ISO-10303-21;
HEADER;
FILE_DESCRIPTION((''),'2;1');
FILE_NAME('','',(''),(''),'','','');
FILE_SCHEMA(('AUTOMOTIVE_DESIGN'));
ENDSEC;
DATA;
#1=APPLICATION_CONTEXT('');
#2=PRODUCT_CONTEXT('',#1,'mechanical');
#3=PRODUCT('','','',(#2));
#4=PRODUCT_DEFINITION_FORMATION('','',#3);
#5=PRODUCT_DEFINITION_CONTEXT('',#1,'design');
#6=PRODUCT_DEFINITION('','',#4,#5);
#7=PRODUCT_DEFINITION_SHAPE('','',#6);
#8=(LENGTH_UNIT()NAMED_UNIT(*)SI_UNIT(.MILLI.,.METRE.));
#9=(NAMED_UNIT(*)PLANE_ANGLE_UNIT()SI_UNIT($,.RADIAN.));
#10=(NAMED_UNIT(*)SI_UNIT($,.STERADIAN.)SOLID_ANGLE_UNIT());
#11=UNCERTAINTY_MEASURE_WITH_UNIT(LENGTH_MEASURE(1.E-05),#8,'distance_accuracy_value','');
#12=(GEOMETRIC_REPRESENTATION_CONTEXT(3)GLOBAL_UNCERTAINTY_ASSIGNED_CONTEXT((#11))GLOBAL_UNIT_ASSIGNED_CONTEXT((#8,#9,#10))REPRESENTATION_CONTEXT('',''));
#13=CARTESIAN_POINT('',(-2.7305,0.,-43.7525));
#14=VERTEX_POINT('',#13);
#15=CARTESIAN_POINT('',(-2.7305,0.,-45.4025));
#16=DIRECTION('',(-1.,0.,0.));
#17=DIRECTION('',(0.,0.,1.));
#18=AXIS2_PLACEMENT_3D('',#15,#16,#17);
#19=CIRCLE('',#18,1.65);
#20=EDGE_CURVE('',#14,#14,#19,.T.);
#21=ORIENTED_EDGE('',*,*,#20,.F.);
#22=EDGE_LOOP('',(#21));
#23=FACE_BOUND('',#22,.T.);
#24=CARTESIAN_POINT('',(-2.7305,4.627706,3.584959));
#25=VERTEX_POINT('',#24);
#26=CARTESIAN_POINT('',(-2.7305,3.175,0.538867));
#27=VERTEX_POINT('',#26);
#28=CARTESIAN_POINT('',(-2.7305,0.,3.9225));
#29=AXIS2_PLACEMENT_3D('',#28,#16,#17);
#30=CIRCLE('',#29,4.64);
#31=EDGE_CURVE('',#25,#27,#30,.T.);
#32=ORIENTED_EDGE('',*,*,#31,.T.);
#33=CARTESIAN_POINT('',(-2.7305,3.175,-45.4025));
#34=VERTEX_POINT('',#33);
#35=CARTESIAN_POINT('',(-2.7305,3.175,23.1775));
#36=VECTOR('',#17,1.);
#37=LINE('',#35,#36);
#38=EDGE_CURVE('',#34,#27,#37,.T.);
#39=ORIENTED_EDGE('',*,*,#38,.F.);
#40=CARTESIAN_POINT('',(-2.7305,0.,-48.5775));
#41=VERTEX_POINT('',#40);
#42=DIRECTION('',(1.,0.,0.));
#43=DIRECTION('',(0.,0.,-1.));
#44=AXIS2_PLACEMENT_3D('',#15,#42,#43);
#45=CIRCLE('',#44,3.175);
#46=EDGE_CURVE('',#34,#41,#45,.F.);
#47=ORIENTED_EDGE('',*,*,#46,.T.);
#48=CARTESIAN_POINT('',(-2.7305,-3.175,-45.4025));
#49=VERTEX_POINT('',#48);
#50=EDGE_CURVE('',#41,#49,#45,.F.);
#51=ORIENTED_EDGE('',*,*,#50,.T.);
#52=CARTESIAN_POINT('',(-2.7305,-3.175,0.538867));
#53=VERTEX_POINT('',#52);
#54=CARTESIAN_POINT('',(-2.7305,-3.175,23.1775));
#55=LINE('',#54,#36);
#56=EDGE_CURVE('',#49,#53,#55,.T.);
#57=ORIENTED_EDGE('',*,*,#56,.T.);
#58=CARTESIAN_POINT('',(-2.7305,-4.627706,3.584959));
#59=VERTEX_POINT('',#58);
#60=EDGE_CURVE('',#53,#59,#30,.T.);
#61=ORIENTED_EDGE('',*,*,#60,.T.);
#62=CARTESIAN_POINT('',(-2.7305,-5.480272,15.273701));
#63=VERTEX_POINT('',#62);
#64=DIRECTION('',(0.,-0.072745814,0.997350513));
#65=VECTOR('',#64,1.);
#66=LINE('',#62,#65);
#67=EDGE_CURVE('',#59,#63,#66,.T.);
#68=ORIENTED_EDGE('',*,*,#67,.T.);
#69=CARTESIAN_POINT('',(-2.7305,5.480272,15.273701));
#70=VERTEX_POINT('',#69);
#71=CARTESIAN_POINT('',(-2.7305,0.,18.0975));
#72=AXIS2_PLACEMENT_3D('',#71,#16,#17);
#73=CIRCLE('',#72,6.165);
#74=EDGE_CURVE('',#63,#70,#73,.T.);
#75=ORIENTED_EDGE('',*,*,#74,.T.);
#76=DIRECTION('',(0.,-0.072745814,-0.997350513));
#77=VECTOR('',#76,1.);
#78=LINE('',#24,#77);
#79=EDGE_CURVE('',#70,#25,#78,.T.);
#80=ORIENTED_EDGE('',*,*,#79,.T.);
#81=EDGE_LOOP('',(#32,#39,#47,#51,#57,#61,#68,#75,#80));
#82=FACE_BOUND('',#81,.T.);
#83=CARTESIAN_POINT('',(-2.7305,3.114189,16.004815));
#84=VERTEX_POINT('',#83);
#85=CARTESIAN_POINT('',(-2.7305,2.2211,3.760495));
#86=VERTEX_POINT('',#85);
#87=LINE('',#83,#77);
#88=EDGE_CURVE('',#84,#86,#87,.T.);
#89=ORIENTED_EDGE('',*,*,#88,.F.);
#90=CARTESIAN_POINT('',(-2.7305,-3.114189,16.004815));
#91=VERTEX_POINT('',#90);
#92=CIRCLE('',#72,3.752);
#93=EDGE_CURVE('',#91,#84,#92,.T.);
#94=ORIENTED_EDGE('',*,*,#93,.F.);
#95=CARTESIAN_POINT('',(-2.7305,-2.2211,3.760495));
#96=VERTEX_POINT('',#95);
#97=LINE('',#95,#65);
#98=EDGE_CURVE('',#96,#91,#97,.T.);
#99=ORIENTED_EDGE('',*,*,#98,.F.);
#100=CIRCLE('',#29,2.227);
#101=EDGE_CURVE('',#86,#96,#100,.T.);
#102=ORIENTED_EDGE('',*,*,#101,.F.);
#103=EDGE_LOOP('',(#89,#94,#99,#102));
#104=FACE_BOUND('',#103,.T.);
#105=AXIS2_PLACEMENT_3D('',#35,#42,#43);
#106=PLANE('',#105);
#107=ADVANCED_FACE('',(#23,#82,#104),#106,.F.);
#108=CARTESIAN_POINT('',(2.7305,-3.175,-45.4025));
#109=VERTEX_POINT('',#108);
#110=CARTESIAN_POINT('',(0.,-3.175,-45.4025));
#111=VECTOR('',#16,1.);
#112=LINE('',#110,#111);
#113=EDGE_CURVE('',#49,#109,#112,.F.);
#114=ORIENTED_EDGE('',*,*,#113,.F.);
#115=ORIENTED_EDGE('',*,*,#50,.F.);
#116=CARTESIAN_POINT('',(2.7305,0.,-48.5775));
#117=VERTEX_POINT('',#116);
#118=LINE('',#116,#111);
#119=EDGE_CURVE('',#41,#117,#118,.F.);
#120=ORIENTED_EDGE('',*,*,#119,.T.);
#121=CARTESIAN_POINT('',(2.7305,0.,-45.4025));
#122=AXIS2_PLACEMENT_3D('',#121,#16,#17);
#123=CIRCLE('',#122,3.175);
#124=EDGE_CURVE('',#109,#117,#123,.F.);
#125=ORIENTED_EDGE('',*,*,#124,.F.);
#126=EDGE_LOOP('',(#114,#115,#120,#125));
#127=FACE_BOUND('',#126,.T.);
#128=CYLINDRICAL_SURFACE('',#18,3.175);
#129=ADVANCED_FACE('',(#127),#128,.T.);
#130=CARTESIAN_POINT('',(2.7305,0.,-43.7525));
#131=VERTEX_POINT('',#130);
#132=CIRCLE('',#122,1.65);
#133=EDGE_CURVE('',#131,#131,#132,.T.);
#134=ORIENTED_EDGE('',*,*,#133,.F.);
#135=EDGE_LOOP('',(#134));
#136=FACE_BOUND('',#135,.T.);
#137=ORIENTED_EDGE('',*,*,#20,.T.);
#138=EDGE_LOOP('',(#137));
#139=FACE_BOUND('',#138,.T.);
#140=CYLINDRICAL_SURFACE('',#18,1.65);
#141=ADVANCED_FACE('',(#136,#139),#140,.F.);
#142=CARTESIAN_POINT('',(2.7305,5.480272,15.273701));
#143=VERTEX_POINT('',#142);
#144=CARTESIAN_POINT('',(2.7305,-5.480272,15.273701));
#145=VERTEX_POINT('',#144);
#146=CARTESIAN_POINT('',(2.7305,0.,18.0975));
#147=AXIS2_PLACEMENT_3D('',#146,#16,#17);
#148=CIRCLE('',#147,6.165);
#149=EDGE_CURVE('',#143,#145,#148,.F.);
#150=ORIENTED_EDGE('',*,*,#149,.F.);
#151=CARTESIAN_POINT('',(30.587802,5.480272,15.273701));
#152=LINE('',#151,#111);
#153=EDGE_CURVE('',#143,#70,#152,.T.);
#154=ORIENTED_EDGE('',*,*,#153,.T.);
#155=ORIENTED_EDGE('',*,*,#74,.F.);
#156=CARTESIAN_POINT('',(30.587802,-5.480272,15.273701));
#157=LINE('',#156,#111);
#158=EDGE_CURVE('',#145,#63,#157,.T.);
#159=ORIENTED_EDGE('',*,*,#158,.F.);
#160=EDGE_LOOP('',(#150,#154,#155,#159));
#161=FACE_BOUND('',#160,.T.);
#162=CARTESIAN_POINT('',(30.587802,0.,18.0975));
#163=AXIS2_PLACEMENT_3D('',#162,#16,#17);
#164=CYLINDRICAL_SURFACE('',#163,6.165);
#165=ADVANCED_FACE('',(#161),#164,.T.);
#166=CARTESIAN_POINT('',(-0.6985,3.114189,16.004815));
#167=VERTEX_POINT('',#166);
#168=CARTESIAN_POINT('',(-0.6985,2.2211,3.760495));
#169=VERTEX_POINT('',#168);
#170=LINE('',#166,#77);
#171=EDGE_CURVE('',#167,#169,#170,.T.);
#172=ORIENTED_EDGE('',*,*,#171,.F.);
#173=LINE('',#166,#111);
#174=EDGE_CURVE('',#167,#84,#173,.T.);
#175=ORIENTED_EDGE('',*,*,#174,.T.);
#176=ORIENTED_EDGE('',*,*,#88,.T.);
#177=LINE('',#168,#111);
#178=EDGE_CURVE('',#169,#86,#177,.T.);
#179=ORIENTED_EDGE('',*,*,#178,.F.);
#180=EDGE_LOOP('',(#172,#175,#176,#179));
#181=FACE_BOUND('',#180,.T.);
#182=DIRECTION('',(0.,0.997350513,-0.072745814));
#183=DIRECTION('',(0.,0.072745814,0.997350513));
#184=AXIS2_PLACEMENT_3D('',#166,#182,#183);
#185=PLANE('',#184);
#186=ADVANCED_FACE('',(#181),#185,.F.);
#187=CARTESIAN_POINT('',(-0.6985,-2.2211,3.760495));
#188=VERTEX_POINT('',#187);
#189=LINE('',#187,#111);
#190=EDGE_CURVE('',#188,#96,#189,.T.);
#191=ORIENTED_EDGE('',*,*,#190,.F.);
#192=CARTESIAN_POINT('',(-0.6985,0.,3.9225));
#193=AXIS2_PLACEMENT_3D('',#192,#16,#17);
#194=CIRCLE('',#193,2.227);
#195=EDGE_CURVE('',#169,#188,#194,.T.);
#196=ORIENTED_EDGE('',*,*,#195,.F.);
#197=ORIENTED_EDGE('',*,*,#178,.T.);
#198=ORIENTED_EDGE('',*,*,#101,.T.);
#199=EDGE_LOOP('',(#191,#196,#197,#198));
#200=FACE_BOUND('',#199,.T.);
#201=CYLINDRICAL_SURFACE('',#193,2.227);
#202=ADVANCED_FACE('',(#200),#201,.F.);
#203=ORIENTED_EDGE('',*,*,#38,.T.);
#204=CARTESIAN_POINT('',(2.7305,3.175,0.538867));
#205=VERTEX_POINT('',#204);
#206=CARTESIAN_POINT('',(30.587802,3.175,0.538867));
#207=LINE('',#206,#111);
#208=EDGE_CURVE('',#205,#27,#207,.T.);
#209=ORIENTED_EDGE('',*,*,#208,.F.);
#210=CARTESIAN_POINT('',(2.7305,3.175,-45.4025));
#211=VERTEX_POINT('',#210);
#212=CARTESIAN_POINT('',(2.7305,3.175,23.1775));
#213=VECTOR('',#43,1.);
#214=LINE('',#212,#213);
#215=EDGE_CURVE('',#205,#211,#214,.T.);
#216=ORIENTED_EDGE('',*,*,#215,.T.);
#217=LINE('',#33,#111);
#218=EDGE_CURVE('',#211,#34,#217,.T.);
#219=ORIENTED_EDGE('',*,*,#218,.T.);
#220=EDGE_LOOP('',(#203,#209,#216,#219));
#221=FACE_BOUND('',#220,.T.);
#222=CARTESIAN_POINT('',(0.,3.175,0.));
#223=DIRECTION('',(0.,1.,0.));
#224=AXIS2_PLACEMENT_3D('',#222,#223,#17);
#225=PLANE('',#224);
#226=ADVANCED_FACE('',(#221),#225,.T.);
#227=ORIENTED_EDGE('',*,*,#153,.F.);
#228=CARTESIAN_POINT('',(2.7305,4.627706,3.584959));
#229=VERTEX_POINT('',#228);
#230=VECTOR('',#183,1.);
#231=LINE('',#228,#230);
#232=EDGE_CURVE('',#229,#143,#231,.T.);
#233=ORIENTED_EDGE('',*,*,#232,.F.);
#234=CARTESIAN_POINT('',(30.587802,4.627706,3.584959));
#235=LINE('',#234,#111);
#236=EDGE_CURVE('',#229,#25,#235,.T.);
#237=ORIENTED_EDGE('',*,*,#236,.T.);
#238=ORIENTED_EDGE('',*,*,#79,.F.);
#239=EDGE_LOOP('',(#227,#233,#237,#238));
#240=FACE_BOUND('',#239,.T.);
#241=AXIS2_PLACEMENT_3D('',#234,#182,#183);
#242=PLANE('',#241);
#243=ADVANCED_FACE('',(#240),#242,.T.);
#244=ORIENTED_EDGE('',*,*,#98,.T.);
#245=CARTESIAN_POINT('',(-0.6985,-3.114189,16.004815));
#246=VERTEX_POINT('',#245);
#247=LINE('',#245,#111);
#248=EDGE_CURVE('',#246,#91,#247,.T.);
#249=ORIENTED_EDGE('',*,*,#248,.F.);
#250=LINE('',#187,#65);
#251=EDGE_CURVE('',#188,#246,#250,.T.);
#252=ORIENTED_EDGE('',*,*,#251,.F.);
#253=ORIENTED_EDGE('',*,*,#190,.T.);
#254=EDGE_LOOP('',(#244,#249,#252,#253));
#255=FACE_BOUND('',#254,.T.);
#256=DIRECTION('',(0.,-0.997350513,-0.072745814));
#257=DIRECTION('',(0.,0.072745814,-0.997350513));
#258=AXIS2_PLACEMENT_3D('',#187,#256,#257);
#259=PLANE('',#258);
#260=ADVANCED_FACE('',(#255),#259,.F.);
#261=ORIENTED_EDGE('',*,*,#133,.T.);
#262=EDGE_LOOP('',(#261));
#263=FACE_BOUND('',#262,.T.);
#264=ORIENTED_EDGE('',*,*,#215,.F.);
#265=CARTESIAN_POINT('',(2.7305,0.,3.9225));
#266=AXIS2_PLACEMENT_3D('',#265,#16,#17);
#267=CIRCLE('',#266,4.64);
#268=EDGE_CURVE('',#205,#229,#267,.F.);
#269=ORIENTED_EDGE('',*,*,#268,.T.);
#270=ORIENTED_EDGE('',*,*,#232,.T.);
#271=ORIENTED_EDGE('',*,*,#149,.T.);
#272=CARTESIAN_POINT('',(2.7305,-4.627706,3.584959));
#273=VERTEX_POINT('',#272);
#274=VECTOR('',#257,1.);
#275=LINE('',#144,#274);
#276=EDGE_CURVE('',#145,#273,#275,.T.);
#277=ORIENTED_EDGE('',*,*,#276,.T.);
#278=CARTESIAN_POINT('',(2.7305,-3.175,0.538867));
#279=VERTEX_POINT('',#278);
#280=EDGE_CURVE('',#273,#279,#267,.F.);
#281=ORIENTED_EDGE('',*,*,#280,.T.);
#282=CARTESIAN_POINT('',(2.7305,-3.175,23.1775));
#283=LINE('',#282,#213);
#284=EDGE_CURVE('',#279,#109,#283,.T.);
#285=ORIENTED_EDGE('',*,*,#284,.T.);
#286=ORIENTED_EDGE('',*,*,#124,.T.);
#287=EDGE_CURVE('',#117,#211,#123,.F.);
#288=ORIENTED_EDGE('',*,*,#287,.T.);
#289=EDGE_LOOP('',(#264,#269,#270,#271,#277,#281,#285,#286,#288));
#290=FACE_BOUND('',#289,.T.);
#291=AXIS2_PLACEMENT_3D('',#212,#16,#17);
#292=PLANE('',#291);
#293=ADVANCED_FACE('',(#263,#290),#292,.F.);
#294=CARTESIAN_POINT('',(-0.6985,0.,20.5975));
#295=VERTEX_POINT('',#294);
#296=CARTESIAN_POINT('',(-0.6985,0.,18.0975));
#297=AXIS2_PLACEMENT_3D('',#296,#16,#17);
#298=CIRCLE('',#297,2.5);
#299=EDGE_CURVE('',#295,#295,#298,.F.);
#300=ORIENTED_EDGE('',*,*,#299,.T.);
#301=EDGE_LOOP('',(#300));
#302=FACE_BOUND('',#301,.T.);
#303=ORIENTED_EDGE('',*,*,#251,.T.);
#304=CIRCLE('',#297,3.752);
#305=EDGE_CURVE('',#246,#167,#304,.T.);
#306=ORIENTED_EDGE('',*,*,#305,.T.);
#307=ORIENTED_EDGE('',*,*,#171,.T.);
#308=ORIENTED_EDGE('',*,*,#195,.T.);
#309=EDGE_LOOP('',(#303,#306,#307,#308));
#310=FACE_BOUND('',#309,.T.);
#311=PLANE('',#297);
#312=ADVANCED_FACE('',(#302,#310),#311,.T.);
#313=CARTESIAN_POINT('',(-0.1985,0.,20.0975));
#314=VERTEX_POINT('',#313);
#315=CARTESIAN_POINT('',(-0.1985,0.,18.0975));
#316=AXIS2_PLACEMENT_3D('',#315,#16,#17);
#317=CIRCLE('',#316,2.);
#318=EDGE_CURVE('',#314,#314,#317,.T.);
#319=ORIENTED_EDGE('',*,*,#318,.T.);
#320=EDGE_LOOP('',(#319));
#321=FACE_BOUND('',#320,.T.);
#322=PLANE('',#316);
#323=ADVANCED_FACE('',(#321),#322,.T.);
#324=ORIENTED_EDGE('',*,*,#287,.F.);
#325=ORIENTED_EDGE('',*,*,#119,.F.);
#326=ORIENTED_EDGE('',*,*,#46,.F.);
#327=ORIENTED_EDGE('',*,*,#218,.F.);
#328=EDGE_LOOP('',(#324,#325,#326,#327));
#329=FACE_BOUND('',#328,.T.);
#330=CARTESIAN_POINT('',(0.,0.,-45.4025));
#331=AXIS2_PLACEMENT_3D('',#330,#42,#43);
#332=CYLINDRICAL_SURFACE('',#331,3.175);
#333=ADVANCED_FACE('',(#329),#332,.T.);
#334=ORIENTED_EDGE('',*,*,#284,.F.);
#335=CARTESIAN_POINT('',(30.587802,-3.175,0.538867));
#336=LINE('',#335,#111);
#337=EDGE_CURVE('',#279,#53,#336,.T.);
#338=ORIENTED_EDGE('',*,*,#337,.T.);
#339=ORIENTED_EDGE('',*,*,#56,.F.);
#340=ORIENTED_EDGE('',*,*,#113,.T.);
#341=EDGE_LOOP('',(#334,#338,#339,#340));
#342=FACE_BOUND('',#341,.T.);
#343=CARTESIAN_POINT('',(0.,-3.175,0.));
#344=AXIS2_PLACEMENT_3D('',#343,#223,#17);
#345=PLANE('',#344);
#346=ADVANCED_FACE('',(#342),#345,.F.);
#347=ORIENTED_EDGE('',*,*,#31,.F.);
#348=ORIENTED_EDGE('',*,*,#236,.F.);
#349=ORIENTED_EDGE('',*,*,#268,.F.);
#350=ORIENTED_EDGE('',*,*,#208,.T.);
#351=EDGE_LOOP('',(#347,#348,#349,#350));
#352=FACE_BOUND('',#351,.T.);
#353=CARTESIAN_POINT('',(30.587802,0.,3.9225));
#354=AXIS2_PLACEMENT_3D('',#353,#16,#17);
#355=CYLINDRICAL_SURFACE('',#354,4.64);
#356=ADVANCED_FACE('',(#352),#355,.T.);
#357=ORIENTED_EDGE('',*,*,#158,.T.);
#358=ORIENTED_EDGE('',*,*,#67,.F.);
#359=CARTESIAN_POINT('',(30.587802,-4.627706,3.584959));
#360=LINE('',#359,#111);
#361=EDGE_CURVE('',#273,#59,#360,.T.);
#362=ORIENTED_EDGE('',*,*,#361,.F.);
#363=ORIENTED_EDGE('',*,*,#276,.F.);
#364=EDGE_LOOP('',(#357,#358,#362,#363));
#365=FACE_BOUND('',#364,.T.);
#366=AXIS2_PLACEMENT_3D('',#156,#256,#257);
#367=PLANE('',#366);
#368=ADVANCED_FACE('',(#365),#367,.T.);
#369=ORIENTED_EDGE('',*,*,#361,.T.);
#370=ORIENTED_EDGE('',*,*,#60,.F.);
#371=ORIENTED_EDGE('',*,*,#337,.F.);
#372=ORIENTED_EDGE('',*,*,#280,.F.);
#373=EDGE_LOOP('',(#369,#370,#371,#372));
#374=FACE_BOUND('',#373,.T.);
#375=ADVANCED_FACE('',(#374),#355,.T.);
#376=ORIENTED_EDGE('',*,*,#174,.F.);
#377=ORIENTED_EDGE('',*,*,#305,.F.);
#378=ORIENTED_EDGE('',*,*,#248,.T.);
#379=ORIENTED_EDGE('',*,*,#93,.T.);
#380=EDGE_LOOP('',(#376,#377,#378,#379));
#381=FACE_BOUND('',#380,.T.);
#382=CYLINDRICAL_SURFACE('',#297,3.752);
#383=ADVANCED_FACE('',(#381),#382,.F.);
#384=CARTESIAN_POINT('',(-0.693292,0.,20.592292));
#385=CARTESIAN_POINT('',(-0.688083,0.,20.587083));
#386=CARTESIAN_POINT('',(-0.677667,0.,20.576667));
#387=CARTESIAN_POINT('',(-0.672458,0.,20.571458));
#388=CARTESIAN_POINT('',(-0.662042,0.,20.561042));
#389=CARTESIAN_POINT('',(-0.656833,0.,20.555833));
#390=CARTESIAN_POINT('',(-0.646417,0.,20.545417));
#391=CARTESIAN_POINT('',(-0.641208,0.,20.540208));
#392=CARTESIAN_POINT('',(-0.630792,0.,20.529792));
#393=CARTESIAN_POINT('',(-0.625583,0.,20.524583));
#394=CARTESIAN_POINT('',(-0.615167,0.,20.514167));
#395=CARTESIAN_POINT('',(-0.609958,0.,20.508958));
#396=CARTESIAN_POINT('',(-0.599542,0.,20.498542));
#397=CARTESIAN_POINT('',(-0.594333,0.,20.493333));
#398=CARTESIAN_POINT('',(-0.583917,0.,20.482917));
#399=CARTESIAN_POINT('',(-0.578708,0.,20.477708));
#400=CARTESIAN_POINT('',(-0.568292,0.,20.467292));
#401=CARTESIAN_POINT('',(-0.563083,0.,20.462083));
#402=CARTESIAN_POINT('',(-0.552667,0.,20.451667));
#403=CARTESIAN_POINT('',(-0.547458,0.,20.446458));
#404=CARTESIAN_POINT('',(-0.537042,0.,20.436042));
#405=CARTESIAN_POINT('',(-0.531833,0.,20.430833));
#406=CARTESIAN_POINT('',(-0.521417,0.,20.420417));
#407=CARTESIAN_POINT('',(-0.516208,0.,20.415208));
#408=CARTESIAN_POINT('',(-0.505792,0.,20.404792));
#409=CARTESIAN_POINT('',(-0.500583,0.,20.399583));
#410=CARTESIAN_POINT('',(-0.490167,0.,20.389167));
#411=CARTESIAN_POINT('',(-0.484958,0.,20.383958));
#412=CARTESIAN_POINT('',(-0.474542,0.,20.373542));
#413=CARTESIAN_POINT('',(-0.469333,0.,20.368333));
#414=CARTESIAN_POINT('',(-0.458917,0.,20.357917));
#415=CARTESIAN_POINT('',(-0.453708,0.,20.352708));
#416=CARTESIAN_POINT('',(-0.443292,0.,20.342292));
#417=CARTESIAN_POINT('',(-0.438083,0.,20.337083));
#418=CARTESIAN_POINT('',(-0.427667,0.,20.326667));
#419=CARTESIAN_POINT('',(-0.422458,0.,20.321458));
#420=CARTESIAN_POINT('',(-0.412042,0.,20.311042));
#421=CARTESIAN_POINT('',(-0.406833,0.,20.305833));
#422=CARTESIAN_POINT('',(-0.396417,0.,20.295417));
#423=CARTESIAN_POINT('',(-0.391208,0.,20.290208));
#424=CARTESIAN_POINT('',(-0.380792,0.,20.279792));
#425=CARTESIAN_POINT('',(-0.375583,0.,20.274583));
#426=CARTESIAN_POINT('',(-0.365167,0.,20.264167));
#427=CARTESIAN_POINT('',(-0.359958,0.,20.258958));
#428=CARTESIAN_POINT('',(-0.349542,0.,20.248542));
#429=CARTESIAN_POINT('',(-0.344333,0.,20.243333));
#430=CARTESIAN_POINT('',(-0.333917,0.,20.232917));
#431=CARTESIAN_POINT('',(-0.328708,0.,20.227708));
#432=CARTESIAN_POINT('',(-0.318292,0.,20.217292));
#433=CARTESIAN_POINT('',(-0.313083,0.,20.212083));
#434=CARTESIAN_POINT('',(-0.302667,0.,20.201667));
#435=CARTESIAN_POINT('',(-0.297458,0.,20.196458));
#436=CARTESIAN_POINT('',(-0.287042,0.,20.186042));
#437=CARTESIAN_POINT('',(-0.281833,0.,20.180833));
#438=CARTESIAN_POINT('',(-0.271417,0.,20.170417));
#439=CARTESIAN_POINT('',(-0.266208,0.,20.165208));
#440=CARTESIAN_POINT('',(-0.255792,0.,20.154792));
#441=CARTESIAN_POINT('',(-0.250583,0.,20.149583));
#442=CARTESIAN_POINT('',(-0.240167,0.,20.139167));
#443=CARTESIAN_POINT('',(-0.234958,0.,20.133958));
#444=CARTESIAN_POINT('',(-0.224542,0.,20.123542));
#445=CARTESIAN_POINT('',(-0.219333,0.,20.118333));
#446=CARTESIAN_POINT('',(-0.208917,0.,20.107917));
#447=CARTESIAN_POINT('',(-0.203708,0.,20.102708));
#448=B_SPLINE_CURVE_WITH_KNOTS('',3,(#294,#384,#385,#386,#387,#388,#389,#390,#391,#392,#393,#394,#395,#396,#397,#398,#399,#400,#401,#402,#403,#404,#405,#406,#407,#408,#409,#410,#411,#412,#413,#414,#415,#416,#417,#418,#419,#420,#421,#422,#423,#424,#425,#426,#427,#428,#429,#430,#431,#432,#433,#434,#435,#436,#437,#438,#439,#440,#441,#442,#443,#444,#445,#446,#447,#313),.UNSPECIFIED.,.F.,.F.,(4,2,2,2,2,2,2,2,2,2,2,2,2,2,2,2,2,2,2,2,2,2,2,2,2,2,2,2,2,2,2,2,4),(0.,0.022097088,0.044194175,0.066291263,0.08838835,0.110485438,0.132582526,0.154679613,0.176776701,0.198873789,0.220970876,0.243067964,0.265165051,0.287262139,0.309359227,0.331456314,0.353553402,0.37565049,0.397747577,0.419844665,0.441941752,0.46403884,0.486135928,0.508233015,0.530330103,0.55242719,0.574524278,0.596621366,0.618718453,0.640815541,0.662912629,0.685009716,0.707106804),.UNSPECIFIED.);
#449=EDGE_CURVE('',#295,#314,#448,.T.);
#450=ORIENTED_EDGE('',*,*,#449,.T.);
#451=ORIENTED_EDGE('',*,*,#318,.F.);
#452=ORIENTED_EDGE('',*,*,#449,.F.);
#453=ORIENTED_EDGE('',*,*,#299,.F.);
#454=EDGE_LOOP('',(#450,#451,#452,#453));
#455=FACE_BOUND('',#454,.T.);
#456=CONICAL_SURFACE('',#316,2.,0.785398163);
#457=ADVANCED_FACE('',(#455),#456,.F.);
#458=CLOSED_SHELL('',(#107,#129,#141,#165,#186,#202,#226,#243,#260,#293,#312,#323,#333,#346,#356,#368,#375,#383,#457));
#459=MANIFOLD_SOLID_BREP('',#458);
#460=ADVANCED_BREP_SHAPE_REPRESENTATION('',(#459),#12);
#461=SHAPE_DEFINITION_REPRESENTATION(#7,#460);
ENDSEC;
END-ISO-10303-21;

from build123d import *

# Parameters (mm, degrees)
SKETCH2_W                     = 5.461
SKETCH2_H                     = 71.755
BOSS_EXTRUDE1_DEPTH           = 3.175
BOSS_EXTRUDE2_DEPTH           = 5.461
CUT_EXTRUDE1_DEPTH            = 2.032
M3_CLEARANCE_HOLE_CLEARENCE_D = 3.3
FILLET1_R                     = 3.175
SKETCH19_R                    = 2
CUT_EXTRUDE2_DEPTH            = 0.500000016
CHAMFER1_SIZE                 = 0.500000016


with BuildPart() as part:
    # Sketch2 → Boss-Extrude1 (new, symmetric)
    with BuildSketch(Plane(origin=(0, 0, 0), x_dir=(1, 0, 0), z_dir=(0, 1, 0))):
        with Locations((0, 12.7)):
            Rectangle(SKETCH2_W, SKETCH2_H)
    extrude(amount=BOSS_EXTRUDE1_DEPTH, both=True)

    # Sketch7 → Boss-Extrude2 (add)
    with BuildSketch(Plane(origin=(-2.7305, 0, 0), x_dir=(0, -1, 0), z_dir=(-1, 0, 0))):
        with BuildLine():
            Line((5.480272256, 15.273700964), (4.627706382, 3.584959425))
            ThreePointArc((4.627706382, 3.584959425), (0, -0.7175), (-4.627706382, 3.584959425))
            Line((-4.627706382, 3.584959425), (-5.480272256, 15.273700964))
            ThreePointArc((-5.480272256, 15.273700964), (0, 24.2625), (5.480272256, 15.273700964))
        make_face()
    extrude(amount=-BOSS_EXTRUDE2_DEPTH)

    # Sketch10 → Cut-Extrude1 (cut)
    with BuildSketch(Plane(origin=(-2.7305, 0, 0), x_dir=(0, -1, 0), z_dir=(-1, 0, 0))):
        with BuildLine():
            Line((-3.114188808, 16.004814628), (-2.221099593, 3.760495073))
            ThreePointArc((-2.221099593, 3.760495073), (0, 1.6955), (2.221099593, 3.760495073))
            Line((2.221099593, 3.760495073), (3.114188808, 16.004814628))
            ThreePointArc((3.114188808, 16.004814628), (0, 21.8495), (-3.114188808, 16.004814628))
        make_face()
    extrude(amount=-CUT_EXTRUDE1_DEPTH, mode=Mode.SUBTRACT)

    # M3 Clearance Hole clearence (through all)
    with Locations(Plane.ZY.offset(2.7305)):
        with Locations((-45.4025, 0)):
            Hole(M3_CLEARANCE_HOLE_CLEARENCE_D / 2)

    # Fillet1
    fillet1_edges = [part.edges().sort_by_distance(p)[0] for p in [
        (0, -3.175, -48.5775),
        (0, 3.175, -48.5775),
    ]]
    fillet(fillet1_edges, radius=FILLET1_R - 0.0001)  # a hair under: the kernel refuses the full size

    # Sketch19 → Cut-Extrude2 (cut)
    with BuildSketch(Plane.ZY.offset(0.6985)):
        with Locations((18.0975, 0)):
            Circle(SKETCH19_R)
    extrude(amount=-CUT_EXTRUDE2_DEPTH, mode=Mode.SUBTRACT)

    # Chamfer1
    chamfer1_edges = [part.edges().sort_by_distance(p)[0] for p in [
        (-0.6985, 0, 16.0975),
    ]]
    chamfer(chamfer1_edges, length=CHAMFER1_SIZE - 0.0001)  # a hair under: the kernel refuses the full size


solid = part.part
